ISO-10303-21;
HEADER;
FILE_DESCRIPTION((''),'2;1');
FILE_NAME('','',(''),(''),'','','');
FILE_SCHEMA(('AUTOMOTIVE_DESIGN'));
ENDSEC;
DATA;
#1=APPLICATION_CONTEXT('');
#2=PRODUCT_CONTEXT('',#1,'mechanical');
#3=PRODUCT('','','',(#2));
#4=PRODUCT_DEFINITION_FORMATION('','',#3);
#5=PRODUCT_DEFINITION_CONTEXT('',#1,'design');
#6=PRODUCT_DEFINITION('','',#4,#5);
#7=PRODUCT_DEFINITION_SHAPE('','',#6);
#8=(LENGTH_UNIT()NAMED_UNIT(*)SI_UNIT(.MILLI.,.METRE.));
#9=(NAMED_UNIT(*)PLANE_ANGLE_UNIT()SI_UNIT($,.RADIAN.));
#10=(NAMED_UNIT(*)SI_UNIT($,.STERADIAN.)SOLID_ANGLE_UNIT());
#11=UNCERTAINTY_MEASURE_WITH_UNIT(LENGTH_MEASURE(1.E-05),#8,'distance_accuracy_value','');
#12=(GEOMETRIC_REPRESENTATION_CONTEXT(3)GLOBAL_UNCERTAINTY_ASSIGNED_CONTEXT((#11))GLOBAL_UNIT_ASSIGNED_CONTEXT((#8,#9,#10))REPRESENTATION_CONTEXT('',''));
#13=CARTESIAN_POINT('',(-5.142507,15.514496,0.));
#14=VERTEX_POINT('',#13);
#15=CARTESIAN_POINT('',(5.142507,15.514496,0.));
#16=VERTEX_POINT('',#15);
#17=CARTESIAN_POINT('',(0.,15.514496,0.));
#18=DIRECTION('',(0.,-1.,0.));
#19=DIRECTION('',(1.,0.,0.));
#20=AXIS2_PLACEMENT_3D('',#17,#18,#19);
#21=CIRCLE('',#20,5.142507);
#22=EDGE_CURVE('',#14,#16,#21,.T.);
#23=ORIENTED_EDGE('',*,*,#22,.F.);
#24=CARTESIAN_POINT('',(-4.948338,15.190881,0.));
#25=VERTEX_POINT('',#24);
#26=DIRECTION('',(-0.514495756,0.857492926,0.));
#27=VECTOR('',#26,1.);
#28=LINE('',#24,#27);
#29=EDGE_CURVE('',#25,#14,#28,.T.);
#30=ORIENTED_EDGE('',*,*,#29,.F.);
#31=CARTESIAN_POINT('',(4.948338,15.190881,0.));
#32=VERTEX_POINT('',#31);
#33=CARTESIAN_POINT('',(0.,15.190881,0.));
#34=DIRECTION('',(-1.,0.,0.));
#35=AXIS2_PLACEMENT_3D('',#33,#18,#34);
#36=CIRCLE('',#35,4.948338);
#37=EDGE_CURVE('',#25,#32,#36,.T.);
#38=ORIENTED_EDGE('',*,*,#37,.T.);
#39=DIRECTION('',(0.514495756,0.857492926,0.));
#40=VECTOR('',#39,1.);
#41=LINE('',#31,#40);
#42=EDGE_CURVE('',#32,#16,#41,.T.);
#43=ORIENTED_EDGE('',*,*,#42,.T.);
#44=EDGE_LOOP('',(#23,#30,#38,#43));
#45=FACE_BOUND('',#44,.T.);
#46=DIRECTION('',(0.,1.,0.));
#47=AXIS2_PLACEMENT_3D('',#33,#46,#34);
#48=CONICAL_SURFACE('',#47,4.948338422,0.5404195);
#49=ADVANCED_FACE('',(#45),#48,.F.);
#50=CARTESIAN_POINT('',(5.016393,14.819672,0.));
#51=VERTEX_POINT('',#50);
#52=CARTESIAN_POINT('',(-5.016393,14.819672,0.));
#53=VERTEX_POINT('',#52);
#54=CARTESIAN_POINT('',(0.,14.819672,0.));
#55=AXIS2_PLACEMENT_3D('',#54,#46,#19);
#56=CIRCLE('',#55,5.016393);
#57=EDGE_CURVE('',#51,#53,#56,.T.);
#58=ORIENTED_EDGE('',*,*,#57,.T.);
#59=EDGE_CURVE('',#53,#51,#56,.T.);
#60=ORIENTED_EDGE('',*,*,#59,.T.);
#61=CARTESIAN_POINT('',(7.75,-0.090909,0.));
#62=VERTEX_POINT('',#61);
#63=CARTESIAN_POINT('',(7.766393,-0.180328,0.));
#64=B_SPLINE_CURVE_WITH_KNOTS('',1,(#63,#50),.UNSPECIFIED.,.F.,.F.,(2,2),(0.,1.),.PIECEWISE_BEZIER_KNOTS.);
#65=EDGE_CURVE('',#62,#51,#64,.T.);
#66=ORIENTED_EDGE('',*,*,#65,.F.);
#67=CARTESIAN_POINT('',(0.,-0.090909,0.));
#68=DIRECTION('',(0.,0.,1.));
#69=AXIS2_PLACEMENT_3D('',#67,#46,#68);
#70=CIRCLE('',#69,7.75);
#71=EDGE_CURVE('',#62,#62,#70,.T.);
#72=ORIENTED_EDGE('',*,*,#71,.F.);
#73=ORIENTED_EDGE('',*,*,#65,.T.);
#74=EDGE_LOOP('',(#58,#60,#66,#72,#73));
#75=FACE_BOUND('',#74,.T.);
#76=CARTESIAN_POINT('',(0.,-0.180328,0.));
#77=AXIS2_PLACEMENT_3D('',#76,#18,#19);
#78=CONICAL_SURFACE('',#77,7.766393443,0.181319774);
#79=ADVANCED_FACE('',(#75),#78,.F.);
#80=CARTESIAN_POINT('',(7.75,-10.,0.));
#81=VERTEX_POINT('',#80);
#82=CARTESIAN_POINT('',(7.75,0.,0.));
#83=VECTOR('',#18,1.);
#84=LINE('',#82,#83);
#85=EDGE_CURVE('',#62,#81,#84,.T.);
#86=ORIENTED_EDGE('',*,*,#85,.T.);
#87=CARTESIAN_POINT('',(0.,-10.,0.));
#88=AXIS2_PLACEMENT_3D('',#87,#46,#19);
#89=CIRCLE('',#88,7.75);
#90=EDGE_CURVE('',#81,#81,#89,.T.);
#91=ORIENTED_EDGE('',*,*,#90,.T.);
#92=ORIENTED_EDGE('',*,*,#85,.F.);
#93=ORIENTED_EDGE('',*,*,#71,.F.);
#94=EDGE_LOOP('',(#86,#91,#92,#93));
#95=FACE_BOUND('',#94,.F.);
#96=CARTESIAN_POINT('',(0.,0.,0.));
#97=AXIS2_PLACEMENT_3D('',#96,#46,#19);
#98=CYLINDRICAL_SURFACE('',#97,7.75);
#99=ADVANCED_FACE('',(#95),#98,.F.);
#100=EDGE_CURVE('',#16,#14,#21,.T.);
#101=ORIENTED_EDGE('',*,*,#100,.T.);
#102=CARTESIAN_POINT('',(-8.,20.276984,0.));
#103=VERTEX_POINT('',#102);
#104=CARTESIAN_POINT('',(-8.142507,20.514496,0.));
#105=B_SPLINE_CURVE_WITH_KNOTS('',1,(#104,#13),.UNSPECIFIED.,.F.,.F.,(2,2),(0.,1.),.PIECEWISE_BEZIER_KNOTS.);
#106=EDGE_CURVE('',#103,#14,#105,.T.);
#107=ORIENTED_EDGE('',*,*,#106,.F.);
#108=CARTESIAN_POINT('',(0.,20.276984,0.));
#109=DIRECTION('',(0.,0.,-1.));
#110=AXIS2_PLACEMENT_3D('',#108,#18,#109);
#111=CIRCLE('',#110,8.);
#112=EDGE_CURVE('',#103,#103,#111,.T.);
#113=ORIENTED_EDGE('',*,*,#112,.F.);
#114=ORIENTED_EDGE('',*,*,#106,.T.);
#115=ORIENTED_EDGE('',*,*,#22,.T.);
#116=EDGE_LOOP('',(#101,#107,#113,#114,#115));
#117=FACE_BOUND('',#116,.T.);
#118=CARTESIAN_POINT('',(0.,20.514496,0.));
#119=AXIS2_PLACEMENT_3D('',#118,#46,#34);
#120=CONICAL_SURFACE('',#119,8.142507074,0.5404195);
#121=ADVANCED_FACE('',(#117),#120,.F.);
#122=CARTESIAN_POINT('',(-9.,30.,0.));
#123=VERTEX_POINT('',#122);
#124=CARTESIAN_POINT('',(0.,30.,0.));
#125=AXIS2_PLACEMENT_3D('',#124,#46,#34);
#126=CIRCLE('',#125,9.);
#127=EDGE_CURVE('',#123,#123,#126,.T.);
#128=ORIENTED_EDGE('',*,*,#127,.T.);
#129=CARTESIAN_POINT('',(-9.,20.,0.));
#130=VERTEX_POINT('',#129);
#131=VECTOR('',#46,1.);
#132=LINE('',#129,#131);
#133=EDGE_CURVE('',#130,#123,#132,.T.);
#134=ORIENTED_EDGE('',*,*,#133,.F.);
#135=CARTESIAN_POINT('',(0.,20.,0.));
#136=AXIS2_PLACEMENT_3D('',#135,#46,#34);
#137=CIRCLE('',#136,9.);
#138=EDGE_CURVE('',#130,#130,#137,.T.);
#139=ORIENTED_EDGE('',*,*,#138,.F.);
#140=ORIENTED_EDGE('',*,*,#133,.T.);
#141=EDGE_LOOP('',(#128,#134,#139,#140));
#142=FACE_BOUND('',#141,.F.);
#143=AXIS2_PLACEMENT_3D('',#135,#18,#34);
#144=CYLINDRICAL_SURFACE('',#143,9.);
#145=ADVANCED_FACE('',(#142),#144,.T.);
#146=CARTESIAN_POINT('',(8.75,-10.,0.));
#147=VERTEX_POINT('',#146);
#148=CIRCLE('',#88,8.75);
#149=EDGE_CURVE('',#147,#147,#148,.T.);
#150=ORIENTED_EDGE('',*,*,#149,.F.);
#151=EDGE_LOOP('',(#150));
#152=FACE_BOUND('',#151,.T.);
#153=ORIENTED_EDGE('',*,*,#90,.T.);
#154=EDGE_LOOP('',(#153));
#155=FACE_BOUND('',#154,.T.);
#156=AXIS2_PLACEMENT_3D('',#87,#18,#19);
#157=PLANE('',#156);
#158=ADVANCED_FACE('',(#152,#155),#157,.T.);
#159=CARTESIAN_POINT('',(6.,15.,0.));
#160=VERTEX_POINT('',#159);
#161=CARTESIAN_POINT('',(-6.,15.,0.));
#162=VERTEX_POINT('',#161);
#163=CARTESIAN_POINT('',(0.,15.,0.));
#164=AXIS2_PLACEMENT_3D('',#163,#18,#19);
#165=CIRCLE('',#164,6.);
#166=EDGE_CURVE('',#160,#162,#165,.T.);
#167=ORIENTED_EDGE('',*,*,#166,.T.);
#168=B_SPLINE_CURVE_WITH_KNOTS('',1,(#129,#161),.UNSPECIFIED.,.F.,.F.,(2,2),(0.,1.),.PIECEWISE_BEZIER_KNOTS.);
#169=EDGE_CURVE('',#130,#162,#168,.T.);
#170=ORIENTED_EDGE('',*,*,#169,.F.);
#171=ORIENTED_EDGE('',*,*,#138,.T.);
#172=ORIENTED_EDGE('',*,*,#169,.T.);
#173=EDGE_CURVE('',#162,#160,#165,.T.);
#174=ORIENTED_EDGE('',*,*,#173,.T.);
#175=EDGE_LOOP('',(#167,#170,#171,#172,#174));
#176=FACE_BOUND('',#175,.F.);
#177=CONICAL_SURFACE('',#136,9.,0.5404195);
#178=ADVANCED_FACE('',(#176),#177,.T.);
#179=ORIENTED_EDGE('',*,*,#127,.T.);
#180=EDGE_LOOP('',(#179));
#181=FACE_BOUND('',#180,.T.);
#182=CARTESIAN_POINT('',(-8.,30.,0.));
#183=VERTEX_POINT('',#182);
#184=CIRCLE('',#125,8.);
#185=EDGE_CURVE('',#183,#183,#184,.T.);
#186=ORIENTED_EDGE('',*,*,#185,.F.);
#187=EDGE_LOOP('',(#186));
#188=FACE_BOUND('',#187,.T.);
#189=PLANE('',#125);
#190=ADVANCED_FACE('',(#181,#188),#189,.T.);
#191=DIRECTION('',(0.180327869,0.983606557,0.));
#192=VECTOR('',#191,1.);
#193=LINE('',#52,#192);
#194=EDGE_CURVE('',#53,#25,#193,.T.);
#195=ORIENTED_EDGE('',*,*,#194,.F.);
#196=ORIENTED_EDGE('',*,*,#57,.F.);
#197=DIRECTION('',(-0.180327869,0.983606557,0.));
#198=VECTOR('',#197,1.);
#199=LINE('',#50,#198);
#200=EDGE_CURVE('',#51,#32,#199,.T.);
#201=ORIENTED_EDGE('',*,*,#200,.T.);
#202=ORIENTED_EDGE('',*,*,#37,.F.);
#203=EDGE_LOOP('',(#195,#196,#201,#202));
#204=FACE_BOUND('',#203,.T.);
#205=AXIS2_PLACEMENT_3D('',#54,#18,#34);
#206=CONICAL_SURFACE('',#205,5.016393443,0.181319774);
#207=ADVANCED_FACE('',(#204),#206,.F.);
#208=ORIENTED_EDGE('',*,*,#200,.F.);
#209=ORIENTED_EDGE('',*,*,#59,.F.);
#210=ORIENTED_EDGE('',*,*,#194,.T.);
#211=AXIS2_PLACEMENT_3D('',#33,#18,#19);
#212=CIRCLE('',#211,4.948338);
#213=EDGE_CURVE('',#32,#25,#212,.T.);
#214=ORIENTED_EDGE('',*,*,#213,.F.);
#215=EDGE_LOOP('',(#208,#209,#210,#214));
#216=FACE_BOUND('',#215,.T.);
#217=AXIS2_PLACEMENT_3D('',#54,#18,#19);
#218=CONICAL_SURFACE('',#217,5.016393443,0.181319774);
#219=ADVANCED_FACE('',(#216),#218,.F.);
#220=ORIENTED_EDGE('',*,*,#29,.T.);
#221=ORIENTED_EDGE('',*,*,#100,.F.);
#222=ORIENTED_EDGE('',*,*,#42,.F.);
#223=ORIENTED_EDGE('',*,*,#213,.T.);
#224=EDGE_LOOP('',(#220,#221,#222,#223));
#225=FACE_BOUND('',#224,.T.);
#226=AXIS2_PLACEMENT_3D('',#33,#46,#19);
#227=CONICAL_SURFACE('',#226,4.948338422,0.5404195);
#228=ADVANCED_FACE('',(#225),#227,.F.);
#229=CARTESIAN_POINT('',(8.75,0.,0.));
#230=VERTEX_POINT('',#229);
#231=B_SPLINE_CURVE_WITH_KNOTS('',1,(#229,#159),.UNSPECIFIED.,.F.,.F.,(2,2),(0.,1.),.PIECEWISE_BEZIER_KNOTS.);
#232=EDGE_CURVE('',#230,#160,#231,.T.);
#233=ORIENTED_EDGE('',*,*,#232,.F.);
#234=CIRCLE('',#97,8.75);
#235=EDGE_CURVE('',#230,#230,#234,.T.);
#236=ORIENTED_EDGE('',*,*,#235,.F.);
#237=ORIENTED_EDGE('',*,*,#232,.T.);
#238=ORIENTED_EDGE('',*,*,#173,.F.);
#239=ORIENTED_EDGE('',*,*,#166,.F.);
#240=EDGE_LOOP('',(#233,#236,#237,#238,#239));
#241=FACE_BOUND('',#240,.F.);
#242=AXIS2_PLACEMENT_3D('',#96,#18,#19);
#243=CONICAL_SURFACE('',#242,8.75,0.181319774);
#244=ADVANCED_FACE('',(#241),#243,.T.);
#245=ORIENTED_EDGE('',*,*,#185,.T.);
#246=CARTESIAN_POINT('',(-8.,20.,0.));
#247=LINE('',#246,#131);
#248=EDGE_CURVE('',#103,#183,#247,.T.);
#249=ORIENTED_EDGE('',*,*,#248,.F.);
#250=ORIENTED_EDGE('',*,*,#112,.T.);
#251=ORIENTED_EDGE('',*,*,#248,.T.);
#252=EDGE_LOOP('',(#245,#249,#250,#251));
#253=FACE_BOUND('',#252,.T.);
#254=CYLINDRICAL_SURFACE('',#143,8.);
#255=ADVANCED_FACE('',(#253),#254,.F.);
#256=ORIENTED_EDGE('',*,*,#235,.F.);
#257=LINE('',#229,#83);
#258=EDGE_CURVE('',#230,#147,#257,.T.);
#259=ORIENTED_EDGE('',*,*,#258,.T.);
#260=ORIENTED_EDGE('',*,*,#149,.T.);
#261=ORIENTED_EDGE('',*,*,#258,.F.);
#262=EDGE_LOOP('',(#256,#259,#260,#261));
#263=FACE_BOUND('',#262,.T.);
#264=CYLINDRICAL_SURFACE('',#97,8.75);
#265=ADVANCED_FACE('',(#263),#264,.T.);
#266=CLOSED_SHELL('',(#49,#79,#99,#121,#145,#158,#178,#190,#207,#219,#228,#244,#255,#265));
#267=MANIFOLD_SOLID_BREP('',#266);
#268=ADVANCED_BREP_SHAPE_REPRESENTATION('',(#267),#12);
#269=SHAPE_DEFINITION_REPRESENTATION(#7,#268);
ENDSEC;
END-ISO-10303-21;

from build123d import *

# Parameters (mm, degrees)
F0_R         = 8.75
F4_R         = 6
F6_DEPTH     = 10
F10_R        = 9
F5_FACE1_R   = 6
F12_DEPTH    = 10
F13_T        = 1
F13_T4_ANGLE = 180.000000001
F13_T6_ANGLE = 180.000000001


# Not quite as in the source:
# - a shell that OpenCascade refuses in one call is made with other operations: the cavity is built on its own and cut out


with BuildPart() as f5:
    # F0 (on Front) → F5 section 0
    with BuildSketch(Plane.XZ):
        Circle(F0_R)
    # F4 (on line) → F5 section 1
    with BuildSketch(Plane(origin=(0, 15, 0), x_dir=(-1, 0, 0), z_dir=(0, 1, 0))):
        Circle(F4_R)
    loft()

    # F6 (add): a face of the model
    f6_faces = [f5.faces().sort_by_distance(p)[0] for p in [
        (0, 0, 0),
    ]]
    extrude(f6_faces, amount=F6_DEPTH)

    # F10 (on line) → F11 section 0
    with BuildSketch(Plane(origin=(0, 20, 0), x_dir=(-1, 0, 0), z_dir=(0, 1, 0))):
        Circle(F10_R)
    # F5_face1 (on face) → F11 section 1
    with BuildSketch(Plane(origin=(0, 15, 0), x_dir=(-1, 0, 0), z_dir=(0, 1, 0))):
        Circle(F5_FACE1_R)
    loft()

    # F12 (add): a face of the model
    f12_faces = [f5.faces().sort_by_distance(p)[0] for p in [
        (0, 20, 0),
    ]]
    extrude(f12_faces, amount=F12_DEPTH)

    # F13: shell of thickness 1, made by hand


with BuildPart() as f13_core1:
    # F13_t2: copy of F5
    add(f5.part)

    # the walls: a layer under each face that stays
    f13_faces = [f13_core1.faces().sort_by_distance(p)[0] for p in [
        (-7.375, 7.5, 0),
        (7.5, 17.5, 0),
        (-8.75, -5, 0),
        (9, 25, 0),
    ]]
    thicken(f13_faces, amount=-F13_T, mode=Mode.SUBTRACT)

    # F13_s3 → F13_t4 (revolve, cut)
    with BuildSketch(Plane.XY):
        Polygon((6.0184109948, 14.9966583211), (5.0163934426, 14.8196721311), (4.9483384219, 15.1908813349), (5.1425070743, 15.5144957554), align=None)
    revolve(axis=Axis((0, 15, 0), (0, -1, 0)), revolution_arc=F13_T4_ANGLE, mode=Mode.SUBTRACT)

    # F13_s5 → F13_t6 (revolve, cut)
    with BuildSketch(Plane.XY):
        Polygon((-6.0184109948, 14.9966583211), (-5.0163934426, 14.8196721311), (-4.9483384219, 15.1908813349), (-5.1425070743, 15.5144957554), align=None)
    revolve(axis=Axis((0, 15, 0), (0, -1, 0)), revolution_arc=F13_T6_ANGLE, mode=Mode.SUBTRACT)


with BuildPart() as f5_1:
    add(f5.part)

    # what is left inside the walls is the cavity
    f13_cavity = [f13_core1.part.solids().sort_by_distance(p)[0] for p in [
        (-6.828962, 4.877481, 0),
    ]]
    add(f13_cavity, mode=Mode.SUBTRACT)


solid = f5_1.part
